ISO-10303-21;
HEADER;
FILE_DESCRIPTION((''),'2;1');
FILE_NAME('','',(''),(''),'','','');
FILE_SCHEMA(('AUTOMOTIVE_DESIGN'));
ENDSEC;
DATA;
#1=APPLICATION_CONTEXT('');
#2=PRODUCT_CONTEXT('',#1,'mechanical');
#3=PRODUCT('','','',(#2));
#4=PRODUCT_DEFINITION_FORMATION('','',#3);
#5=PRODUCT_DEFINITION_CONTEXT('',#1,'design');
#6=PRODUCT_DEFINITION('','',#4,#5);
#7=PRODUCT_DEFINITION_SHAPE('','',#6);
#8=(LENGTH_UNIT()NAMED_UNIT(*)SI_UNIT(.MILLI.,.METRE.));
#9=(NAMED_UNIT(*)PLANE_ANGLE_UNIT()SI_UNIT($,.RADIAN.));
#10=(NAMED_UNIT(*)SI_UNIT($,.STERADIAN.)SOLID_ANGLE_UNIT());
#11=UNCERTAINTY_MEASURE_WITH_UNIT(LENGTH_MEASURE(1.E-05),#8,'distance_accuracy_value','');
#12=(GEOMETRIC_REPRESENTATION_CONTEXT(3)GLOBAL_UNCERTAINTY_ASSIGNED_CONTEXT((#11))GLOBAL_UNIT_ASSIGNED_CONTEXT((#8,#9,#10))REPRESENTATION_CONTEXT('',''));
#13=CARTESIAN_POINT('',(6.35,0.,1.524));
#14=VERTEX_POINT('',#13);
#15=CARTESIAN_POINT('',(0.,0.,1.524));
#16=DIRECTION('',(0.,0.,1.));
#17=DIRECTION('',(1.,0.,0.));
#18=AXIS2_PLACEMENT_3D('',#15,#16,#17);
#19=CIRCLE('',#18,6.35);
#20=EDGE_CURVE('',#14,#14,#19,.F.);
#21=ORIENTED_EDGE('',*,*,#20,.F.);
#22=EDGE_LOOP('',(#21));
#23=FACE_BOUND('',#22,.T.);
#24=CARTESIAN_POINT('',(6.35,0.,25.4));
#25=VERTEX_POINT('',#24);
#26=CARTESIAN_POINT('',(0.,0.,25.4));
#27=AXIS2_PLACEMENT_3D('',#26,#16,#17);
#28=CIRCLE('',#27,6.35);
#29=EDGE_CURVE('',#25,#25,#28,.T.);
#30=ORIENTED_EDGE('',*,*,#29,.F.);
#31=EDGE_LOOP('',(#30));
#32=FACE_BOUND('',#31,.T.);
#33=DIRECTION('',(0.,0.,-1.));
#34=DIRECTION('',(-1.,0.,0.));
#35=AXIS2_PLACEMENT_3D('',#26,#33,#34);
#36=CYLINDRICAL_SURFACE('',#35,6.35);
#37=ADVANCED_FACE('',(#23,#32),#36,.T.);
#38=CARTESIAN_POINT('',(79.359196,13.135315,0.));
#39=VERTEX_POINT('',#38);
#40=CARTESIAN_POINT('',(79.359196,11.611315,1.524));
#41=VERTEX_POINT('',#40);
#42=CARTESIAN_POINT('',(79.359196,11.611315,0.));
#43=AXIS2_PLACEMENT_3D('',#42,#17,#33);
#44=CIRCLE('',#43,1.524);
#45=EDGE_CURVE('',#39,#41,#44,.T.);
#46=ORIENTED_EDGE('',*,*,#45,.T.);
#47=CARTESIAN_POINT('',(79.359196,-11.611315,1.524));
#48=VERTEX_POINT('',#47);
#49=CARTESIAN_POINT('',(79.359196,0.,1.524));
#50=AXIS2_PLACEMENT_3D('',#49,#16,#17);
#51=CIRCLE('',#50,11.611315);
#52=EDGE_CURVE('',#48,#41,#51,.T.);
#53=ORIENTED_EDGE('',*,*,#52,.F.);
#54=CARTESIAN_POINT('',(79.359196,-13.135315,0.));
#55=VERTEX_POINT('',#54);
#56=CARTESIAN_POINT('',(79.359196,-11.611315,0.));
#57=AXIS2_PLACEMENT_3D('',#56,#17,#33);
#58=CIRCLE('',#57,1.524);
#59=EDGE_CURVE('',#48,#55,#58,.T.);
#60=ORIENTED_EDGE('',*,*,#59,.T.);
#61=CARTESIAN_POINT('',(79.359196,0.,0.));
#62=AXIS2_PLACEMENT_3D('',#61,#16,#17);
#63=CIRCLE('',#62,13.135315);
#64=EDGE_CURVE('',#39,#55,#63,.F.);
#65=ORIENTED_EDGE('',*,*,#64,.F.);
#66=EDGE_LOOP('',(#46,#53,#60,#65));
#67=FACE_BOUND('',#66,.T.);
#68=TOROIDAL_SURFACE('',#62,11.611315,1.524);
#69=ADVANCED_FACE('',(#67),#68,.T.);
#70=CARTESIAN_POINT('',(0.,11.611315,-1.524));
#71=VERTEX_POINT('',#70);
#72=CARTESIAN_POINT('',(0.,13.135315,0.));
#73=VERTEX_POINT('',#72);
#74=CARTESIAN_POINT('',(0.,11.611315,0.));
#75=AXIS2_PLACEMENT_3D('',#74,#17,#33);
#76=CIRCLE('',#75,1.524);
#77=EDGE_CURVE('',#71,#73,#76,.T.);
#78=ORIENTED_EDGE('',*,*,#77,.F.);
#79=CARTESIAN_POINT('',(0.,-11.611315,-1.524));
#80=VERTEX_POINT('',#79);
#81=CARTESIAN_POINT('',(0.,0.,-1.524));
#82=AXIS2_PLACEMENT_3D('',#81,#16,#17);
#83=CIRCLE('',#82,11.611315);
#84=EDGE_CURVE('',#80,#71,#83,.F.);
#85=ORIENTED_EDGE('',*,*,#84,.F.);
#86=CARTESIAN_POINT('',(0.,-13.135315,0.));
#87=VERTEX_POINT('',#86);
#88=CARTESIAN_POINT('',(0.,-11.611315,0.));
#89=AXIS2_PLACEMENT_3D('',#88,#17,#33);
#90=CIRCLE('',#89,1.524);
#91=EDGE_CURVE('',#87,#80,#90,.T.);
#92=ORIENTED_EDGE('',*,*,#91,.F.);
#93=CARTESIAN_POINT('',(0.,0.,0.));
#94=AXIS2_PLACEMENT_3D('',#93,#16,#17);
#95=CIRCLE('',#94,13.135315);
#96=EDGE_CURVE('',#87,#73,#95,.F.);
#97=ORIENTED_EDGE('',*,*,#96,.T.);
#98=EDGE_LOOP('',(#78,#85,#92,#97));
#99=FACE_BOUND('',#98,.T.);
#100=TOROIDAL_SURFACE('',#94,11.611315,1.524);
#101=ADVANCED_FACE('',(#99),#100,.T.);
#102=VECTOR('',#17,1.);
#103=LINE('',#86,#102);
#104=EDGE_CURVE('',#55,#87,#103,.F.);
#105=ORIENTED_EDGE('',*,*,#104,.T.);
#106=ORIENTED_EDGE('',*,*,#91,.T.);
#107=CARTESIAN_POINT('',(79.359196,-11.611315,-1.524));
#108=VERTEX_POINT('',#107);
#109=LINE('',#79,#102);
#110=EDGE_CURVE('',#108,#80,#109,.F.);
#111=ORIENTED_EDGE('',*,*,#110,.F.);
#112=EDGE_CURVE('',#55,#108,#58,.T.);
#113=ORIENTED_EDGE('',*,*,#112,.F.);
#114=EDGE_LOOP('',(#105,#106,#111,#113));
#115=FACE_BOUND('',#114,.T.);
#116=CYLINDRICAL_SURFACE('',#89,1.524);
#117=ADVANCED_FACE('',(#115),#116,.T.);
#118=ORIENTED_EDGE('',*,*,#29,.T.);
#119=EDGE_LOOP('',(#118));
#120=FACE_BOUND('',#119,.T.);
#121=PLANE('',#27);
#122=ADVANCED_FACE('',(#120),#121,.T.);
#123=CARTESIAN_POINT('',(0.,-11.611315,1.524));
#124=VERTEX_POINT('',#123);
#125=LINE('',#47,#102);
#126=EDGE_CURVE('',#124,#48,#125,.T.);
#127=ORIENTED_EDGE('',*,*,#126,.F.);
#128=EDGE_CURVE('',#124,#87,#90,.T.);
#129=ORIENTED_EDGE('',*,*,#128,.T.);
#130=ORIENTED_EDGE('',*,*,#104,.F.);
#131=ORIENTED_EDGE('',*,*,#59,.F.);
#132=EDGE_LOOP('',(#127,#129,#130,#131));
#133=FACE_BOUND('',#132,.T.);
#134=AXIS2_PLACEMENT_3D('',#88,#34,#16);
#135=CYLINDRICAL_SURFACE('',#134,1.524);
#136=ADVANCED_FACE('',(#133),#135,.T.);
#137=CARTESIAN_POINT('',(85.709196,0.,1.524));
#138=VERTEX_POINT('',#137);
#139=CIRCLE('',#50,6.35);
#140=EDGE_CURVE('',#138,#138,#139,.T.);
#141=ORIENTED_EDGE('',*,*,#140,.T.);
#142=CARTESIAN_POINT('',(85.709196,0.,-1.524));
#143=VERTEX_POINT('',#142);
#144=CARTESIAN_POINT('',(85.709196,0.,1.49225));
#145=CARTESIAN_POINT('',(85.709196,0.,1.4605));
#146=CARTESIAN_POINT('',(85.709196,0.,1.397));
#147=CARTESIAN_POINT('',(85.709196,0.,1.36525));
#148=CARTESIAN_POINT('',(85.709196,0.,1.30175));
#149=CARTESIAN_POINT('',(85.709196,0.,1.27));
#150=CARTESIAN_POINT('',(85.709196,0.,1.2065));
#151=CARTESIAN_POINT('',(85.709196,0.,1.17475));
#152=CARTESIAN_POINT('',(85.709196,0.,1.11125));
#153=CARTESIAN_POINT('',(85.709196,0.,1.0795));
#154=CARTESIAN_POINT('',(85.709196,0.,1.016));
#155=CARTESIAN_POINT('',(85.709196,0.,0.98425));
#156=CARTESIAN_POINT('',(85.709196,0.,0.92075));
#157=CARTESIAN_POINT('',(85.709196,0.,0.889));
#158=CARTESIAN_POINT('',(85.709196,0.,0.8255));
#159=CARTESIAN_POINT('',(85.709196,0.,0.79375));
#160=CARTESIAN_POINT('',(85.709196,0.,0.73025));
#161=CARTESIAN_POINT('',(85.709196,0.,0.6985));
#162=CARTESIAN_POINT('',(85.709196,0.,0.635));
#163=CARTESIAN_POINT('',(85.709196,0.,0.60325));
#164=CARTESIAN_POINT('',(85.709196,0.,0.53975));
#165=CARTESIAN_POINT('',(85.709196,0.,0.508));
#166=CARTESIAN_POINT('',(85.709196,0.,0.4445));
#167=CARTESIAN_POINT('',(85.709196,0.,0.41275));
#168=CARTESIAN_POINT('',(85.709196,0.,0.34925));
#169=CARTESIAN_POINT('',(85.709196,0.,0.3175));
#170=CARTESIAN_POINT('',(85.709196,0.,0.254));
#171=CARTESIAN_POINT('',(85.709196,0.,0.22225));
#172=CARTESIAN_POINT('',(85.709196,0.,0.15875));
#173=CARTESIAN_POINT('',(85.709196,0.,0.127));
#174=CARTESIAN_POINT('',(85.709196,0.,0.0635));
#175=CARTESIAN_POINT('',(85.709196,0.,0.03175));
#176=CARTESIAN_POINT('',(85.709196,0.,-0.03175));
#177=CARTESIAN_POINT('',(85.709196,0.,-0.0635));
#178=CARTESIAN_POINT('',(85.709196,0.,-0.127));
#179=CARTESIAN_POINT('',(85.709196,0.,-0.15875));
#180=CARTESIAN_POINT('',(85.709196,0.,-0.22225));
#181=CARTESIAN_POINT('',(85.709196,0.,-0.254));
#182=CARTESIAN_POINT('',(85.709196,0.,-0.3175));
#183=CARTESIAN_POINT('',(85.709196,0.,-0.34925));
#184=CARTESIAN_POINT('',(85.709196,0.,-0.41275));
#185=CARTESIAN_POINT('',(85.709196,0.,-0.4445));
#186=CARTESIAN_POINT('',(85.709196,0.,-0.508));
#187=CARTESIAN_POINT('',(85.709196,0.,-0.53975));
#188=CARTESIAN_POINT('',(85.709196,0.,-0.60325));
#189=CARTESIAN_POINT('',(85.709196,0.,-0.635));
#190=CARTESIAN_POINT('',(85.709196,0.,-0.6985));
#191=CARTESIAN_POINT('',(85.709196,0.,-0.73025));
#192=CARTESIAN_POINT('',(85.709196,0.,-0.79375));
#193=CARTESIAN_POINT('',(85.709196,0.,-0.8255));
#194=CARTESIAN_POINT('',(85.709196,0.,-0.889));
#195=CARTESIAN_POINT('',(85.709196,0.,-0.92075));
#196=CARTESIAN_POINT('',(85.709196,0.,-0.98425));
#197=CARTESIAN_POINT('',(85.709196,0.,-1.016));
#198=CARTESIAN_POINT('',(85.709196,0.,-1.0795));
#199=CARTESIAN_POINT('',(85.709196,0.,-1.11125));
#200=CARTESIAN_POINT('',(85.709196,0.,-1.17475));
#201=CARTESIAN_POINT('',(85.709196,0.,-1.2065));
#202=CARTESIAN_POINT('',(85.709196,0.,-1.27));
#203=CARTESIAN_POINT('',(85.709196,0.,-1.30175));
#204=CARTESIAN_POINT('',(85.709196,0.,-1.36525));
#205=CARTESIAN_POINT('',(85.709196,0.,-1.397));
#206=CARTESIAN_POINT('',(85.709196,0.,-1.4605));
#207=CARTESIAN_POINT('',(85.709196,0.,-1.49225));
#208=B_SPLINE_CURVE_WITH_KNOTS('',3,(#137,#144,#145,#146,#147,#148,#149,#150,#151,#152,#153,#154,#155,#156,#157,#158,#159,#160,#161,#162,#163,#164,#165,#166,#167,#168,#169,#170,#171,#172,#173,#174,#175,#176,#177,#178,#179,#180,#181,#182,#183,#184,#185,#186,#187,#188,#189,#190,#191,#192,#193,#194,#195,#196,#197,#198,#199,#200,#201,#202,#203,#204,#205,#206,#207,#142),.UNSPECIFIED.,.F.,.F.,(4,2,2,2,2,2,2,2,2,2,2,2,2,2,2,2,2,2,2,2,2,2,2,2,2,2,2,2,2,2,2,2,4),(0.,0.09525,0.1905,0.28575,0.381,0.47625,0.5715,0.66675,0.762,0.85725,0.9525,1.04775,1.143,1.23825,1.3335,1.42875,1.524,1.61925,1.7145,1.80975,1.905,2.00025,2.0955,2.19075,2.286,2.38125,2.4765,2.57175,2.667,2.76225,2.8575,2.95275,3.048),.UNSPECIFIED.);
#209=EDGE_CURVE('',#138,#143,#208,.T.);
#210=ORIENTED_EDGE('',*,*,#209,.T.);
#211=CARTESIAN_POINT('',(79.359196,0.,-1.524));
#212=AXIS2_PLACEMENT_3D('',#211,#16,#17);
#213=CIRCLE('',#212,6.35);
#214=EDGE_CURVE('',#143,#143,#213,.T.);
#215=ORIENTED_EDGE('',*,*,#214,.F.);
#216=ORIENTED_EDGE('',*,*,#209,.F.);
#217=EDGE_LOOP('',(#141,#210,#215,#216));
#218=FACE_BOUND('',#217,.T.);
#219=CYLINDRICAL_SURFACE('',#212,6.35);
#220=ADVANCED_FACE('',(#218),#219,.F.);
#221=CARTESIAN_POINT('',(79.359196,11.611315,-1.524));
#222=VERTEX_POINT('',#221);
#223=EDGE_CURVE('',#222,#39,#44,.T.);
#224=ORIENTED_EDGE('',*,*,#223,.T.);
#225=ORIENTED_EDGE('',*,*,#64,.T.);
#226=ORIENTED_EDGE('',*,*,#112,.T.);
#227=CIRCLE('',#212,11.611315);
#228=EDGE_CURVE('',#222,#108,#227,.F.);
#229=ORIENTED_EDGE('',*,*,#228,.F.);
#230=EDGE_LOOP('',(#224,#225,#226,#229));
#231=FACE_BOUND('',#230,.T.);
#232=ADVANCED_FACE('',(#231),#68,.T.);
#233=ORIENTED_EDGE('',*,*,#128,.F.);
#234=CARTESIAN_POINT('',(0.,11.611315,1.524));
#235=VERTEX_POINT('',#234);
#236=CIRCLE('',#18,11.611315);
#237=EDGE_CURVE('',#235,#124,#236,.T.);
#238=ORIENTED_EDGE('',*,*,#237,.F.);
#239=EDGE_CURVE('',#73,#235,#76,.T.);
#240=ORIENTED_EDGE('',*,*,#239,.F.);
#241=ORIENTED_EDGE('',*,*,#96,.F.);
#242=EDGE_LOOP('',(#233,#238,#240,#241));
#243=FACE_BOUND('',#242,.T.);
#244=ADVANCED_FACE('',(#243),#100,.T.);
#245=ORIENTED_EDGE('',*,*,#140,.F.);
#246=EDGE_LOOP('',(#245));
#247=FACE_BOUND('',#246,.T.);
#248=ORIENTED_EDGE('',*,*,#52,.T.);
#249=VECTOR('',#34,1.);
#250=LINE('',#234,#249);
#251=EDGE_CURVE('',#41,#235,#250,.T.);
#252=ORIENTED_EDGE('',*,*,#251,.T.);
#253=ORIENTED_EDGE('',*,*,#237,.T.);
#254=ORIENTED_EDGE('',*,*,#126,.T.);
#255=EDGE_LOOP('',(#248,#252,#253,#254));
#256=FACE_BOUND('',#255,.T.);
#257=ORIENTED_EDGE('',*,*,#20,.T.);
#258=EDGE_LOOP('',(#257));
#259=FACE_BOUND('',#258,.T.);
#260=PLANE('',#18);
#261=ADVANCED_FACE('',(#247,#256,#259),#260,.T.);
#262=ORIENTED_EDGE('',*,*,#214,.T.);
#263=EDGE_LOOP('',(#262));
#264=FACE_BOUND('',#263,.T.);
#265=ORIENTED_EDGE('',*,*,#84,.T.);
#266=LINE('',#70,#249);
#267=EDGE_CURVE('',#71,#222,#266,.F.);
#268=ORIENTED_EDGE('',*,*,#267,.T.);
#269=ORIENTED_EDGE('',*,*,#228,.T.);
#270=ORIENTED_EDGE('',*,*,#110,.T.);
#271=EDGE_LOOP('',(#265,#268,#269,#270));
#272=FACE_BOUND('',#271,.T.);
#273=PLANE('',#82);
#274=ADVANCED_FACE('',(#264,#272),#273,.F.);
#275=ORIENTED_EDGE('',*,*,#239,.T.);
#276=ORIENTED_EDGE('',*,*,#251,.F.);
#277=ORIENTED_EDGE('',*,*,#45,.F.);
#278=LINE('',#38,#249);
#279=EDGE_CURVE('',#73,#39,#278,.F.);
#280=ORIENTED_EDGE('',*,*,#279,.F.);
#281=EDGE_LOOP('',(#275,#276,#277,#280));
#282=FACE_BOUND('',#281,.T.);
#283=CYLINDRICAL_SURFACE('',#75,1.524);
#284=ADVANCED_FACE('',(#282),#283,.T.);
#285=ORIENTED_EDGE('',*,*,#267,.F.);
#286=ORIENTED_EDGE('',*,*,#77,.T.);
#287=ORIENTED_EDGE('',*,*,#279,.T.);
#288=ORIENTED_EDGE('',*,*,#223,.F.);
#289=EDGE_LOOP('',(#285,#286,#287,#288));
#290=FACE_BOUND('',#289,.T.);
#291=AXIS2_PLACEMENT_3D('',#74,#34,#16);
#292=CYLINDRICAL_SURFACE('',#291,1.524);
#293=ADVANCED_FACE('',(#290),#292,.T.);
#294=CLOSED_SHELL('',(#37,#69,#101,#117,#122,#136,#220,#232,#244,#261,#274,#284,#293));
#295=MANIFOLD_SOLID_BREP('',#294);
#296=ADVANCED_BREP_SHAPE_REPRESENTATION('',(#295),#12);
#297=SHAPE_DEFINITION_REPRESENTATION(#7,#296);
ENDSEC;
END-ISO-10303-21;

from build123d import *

# Parameters (mm, degrees)
BOSS_EXTRUDE1_DEPTH     = 1.524
FILLET1_R               = 1.524
SKETCH3_R               = 6.35
BOSS_EXTRUDE3_DEPTH     = 25.4
CUT_EXTRUDE4_DEPTH      = 97.813899613
CUT_EXTRUDE4_DEPTH_BACK = 97.813899613
SKETCH5_R               = 6.35


with BuildPart() as part:
    # Sketch2 → Boss-Extrude1 (new, symmetric)
    with BuildSketch(Plane.XY):
        with BuildLine():
            Line((0, 13.135315222), (79.359196135, 13.135315222))
            ThreePointArc((79.359196135, 13.135315222), (92.494511357, 0), (79.359196135, -13.135315222))
            Line((79.359196135, -13.135315222), (0, -13.135315222))
            ThreePointArc((0, -13.135315222), (-13.135315222, 0), (0, 13.135315222))
        make_face()
    extrude(amount=BOSS_EXTRUDE1_DEPTH, both=True)

    # Fillet1
    fillet1_edges = [part.edges().sort_by_distance(p)[0] for p in [
        (92.494511357, 0, -1.524),
        (39.679598067, -13.135315222, -1.524),
        (-13.135315222, 0, -1.524),
        (92.494511357, 0, 1.524),
        (39.679598067, -13.135315222, 1.524),
        (-13.135315222, 0, 1.524),
        (39.679598067, 13.135315222, -1.524),
        (39.679598067, 13.135315222, 1.524),
    ]]
    fillet(fillet1_edges, radius=FILLET1_R - 0.0001)  # a hair under: the kernel refuses the full size

    # Sketch3 → Boss-Extrude3 (add)
    with BuildSketch(Plane.XY):
        Circle(SKETCH3_R)
    extrude(amount=BOSS_EXTRUDE3_DEPTH)

    # Sketch5 → Cut-Extrude4 (cut, two sides: drawn at the far end of the back side and taken through both)
    with BuildSketch(Plane.XY.offset(-CUT_EXTRUDE4_DEPTH_BACK)):
        with Locations((79.359196135, 0)):
            Circle(SKETCH5_R)
    extrude(amount=CUT_EXTRUDE4_DEPTH + CUT_EXTRUDE4_DEPTH_BACK, mode=Mode.SUBTRACT)


solid = part.part
